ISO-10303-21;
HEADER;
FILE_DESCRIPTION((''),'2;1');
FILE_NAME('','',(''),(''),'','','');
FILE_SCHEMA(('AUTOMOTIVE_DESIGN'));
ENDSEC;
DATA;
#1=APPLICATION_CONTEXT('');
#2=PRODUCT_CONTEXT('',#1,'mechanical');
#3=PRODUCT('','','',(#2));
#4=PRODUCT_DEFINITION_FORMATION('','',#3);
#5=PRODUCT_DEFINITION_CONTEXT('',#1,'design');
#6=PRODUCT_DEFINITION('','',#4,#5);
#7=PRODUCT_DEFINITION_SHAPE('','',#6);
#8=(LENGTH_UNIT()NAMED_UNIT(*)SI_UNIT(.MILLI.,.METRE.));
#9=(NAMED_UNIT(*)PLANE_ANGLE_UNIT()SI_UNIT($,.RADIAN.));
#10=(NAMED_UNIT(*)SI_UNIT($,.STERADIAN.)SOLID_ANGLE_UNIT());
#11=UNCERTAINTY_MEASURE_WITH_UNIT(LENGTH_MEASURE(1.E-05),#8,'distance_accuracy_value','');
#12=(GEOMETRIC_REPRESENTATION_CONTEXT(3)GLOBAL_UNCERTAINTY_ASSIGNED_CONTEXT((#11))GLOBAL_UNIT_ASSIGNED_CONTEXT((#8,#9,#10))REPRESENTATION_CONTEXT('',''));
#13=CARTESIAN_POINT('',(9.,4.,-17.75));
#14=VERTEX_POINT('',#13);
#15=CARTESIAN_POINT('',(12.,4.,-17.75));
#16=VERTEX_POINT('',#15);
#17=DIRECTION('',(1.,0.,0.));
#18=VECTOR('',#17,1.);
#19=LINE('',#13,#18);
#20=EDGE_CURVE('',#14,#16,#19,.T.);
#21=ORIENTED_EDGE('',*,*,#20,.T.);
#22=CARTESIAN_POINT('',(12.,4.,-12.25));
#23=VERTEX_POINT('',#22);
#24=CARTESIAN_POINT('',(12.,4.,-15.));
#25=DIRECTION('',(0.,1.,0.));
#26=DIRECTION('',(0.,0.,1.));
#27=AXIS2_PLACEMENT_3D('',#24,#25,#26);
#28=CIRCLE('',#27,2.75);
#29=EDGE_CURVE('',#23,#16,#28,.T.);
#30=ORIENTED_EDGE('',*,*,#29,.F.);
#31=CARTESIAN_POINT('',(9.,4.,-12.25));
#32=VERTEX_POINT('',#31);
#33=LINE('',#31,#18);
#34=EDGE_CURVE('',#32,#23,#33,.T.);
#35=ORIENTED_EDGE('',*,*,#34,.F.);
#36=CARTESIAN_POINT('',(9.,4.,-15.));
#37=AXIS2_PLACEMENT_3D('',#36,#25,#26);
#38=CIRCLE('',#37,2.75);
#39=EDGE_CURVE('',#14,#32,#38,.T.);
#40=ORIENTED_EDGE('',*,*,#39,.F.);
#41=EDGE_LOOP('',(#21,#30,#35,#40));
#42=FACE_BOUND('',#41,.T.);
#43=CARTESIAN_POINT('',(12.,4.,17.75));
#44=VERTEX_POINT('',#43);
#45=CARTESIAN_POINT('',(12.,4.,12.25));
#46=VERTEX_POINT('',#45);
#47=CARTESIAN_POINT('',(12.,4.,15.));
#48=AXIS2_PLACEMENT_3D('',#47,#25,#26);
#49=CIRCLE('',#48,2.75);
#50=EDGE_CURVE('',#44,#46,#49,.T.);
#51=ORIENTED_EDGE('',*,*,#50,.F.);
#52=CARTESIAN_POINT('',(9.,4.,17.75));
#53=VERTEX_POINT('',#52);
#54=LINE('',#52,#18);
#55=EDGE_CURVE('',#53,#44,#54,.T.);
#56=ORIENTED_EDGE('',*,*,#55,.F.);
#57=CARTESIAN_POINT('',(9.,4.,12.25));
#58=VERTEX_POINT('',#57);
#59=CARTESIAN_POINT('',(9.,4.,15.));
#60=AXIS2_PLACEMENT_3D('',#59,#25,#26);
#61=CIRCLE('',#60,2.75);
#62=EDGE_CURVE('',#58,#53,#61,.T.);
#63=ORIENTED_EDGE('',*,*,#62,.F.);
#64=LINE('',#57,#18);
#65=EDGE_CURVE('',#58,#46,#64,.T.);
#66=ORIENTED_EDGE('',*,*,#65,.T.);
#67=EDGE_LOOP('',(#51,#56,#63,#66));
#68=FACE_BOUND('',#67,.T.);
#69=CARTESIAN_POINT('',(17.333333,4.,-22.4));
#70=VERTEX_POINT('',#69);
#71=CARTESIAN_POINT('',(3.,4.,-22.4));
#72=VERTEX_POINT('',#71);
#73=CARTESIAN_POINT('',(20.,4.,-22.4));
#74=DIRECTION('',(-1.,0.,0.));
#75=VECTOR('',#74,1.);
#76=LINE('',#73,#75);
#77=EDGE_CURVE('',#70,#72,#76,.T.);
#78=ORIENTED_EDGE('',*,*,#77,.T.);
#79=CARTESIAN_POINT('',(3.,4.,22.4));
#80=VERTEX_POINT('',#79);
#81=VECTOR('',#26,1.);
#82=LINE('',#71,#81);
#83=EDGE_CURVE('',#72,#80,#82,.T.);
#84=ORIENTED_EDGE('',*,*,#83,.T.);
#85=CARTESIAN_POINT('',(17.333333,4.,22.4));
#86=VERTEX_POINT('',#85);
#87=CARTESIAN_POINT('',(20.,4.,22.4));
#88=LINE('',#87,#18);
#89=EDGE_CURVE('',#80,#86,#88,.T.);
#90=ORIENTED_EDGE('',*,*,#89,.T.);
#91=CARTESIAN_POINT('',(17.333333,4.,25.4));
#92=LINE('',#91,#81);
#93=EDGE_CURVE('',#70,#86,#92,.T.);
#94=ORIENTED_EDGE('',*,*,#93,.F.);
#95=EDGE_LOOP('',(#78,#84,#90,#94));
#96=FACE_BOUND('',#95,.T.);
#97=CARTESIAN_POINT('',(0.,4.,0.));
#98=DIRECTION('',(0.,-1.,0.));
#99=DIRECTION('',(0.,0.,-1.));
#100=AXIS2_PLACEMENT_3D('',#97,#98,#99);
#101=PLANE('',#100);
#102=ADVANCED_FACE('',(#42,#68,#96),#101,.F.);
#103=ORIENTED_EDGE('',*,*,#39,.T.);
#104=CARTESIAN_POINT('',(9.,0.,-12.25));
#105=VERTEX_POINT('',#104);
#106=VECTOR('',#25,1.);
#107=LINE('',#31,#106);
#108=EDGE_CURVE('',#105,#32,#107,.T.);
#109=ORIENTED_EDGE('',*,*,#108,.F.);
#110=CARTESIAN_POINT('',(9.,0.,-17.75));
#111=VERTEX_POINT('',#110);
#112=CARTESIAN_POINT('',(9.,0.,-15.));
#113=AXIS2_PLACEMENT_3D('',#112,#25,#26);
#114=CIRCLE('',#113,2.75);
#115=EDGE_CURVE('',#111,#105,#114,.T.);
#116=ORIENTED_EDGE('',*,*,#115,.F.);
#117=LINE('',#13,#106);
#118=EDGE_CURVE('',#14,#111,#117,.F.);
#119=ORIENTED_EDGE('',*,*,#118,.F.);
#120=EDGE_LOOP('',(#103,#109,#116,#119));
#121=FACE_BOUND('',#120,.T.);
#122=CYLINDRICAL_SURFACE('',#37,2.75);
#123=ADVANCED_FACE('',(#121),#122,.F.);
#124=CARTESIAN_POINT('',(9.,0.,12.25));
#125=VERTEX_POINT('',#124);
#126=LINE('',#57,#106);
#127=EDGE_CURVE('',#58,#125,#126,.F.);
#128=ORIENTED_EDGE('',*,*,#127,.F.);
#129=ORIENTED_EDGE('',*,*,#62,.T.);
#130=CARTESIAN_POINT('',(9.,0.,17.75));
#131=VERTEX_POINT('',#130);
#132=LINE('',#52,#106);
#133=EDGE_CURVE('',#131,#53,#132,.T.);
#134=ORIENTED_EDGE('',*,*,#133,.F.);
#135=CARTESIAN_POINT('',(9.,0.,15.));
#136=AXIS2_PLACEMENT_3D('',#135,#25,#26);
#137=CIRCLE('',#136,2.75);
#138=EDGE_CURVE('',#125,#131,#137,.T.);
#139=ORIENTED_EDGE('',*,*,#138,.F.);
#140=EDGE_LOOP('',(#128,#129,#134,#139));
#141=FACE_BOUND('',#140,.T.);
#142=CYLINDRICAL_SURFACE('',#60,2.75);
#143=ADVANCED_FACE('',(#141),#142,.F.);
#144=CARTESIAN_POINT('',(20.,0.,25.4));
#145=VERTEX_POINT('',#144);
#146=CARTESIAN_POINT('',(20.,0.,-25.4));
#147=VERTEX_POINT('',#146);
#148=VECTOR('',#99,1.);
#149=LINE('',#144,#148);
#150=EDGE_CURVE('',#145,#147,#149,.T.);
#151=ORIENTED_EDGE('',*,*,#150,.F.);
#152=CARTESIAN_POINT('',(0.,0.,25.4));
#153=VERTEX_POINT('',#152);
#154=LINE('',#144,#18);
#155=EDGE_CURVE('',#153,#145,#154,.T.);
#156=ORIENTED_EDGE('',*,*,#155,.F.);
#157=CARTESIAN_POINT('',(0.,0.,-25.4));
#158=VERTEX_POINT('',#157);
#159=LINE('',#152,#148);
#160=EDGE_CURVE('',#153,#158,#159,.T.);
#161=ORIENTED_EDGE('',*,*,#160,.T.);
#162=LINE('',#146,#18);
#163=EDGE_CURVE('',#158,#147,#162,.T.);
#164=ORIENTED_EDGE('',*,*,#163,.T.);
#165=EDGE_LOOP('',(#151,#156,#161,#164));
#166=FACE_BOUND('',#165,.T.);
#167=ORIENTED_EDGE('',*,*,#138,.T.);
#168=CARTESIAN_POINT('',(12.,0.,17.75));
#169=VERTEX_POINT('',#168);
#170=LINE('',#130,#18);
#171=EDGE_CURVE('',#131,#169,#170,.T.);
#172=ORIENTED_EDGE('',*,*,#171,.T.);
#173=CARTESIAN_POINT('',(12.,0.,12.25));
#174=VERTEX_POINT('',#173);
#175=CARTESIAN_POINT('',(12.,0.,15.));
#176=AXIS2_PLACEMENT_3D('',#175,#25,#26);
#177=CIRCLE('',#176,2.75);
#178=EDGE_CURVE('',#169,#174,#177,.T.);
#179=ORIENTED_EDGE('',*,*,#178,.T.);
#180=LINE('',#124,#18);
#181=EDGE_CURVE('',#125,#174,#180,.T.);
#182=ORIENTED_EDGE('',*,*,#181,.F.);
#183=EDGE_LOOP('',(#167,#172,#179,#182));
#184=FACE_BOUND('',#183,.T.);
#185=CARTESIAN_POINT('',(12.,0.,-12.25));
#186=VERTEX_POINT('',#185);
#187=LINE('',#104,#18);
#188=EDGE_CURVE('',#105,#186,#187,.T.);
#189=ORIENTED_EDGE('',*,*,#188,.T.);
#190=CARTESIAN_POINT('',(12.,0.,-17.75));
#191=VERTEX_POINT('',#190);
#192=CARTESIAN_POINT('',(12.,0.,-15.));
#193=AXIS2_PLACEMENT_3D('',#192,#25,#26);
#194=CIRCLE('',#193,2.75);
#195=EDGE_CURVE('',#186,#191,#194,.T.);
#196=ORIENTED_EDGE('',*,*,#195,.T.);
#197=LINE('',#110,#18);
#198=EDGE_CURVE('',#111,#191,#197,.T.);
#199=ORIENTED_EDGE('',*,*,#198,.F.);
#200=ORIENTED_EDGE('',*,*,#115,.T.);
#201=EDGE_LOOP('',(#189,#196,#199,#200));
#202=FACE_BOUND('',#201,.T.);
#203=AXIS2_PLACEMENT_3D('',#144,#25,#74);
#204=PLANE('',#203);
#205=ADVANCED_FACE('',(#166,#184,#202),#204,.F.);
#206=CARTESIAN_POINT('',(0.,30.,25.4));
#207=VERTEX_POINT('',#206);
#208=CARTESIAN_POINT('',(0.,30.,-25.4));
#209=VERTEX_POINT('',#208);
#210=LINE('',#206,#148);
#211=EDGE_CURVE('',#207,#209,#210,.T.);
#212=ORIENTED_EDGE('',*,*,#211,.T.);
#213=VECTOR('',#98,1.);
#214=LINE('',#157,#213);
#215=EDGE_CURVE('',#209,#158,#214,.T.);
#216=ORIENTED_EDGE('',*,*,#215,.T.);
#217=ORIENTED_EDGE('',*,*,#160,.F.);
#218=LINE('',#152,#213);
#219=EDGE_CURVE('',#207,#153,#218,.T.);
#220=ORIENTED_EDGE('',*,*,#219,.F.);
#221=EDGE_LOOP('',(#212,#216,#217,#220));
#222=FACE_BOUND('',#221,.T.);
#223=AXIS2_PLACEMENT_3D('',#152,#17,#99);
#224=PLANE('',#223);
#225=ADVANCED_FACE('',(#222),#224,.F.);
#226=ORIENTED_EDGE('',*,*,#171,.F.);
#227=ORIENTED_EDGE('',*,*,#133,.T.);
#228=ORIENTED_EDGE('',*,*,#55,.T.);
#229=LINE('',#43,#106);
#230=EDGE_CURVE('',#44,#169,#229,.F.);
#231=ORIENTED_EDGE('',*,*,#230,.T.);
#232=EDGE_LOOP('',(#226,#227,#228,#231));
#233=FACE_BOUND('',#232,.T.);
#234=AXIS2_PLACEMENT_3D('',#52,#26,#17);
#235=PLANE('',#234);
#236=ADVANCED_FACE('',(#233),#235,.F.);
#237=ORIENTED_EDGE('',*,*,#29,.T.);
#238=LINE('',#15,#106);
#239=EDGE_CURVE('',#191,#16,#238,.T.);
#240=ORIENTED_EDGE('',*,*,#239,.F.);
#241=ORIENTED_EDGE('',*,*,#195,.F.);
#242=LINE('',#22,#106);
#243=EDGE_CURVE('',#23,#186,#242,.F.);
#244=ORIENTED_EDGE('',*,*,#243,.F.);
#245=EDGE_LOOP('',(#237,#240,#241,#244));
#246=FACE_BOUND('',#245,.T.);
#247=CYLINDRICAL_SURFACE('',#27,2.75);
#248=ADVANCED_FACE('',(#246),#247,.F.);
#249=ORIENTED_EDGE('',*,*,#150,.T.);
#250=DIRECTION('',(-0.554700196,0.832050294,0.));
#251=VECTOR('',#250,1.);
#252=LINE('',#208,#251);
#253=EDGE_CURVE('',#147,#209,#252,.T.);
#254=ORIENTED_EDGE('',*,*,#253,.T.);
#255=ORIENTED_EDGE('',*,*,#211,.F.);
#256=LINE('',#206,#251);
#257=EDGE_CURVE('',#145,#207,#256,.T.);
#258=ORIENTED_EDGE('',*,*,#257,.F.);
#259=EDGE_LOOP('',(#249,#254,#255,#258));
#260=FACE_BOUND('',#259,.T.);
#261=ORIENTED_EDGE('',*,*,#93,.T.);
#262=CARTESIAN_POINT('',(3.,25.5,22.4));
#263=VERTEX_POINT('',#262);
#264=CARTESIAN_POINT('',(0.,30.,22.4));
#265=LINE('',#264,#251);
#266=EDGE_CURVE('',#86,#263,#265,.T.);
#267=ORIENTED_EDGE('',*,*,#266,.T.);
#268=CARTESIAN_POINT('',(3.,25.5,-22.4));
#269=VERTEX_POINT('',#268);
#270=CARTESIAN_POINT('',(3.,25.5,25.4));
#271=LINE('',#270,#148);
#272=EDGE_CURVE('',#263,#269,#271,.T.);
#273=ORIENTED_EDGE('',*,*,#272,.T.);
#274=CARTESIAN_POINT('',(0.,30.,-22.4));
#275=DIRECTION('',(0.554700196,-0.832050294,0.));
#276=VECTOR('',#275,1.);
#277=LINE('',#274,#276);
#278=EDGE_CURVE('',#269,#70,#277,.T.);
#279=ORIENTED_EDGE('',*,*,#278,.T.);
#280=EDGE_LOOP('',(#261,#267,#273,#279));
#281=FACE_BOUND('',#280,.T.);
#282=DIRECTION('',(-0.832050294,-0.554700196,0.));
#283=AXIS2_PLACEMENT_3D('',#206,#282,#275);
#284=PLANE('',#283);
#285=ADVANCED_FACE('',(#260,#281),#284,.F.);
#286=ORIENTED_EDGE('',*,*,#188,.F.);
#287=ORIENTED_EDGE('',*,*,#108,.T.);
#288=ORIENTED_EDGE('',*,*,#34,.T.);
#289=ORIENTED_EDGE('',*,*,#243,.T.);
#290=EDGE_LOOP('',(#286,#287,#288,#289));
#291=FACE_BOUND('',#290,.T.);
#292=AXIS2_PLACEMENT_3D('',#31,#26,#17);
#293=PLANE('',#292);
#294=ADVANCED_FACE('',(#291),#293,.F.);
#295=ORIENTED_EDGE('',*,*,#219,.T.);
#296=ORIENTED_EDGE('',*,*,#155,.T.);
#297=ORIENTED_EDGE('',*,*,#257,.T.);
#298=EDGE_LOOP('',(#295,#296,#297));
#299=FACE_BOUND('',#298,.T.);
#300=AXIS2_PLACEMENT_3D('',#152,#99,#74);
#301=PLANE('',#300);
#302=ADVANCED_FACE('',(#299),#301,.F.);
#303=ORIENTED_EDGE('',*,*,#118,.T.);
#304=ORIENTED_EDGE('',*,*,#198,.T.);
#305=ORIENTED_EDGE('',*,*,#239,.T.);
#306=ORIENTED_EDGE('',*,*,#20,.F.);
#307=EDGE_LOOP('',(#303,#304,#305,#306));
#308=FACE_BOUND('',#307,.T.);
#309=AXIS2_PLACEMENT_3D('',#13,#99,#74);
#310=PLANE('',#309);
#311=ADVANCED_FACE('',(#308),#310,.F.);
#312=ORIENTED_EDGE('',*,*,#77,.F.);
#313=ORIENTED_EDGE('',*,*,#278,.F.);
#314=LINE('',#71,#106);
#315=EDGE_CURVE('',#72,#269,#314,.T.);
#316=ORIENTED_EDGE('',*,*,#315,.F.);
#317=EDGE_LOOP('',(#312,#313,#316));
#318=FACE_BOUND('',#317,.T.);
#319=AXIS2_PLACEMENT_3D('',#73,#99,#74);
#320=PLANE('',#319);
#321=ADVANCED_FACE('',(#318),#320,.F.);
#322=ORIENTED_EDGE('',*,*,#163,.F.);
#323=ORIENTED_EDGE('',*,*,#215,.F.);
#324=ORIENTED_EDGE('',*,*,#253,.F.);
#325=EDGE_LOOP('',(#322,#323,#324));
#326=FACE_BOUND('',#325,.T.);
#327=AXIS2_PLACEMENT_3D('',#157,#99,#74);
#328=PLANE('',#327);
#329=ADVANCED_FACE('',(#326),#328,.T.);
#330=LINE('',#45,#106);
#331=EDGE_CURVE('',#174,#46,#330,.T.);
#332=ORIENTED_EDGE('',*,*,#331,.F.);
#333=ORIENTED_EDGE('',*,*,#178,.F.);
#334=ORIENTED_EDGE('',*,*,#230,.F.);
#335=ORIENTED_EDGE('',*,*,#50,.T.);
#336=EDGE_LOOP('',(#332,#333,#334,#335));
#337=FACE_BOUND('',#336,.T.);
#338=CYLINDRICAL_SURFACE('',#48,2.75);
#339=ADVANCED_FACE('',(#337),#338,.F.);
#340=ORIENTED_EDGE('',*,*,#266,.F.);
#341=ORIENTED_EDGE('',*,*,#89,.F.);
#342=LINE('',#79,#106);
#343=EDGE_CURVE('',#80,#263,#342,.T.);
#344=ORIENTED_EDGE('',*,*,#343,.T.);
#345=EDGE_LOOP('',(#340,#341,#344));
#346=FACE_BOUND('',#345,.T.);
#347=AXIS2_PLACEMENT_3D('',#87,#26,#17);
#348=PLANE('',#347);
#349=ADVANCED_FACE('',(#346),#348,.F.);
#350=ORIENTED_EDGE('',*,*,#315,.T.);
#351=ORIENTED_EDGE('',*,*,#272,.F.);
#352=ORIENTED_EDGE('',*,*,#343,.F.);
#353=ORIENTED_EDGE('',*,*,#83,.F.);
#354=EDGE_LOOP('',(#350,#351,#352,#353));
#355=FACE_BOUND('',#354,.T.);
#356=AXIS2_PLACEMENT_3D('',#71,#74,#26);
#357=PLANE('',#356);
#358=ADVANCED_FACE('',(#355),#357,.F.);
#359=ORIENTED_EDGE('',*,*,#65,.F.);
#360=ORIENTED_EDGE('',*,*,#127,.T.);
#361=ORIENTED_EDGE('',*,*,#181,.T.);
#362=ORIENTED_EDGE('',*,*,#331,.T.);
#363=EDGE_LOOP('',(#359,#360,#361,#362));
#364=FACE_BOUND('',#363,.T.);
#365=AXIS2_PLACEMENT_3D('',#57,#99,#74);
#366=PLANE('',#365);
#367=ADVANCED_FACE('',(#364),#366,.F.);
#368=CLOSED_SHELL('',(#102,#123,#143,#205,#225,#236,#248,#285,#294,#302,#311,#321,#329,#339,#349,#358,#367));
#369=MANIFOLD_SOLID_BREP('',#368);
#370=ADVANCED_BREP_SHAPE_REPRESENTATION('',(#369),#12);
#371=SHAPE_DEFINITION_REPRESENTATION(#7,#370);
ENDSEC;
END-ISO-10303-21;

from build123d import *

# Parameters (mm, degrees)
BOSS_EXTRUDE1_DEPTH      = 25.4
SKETCH3_W                = 17
SKETCH3_H                = 44.8
CUT_EXTRUDE1_DEPTH       = 26
M5_CLEARANCE_SLOT1_DEPTH = 4


# Read off the part's stored shape, not the designer's step: M5 Clearance Slot1
with BuildPart() as part:
    # Sketch2 → Boss-Extrude1 (new, symmetric)
    with BuildSketch(Plane.XY):
        Polygon((0, 0), (0, 30), (20, 0), align=None)
    extrude(amount=BOSS_EXTRUDE1_DEPTH, both=True)

    # Sketch3 → Cut-Extrude1 (cut)
    with BuildSketch(Plane(origin=(0, 30, 0), x_dir=(1, 0, 0), z_dir=(0, 1, 0))):
        with Locations((11.5, 0)):
            Rectangle(SKETCH3_W, SKETCH3_H)
    extrude(amount=-CUT_EXTRUDE1_DEPTH, mode=Mode.SUBTRACT)

    # M5 Clearance Slot1 outline → M5 Clearance Slot1 (cut)
    with BuildSketch(Plane(origin=(0, 0, 0), x_dir=(1, 0, 0), z_dir=(0, 1, 0))):
        with BuildLine():
            Line((9, 12.25), (12, 12.25))
            ThreePointArc((12, 12.25), (14.75, 15), (12, 17.75))
            Line((12, 17.75), (9, 17.75))
            ThreePointArc((9, 17.75), (6.25, 15), (9, 12.25))
        make_face()
        with BuildLine():
            Line((9, -17.75), (12, -17.75))
            ThreePointArc((12, -17.75), (14.75, -15), (12, -12.25))
            Line((12, -12.25), (9, -12.25))
            ThreePointArc((9, -12.25), (6.25, -15), (9, -17.75))
        make_face()
    extrude(amount=M5_CLEARANCE_SLOT1_DEPTH, mode=Mode.SUBTRACT)


solid = part.part
